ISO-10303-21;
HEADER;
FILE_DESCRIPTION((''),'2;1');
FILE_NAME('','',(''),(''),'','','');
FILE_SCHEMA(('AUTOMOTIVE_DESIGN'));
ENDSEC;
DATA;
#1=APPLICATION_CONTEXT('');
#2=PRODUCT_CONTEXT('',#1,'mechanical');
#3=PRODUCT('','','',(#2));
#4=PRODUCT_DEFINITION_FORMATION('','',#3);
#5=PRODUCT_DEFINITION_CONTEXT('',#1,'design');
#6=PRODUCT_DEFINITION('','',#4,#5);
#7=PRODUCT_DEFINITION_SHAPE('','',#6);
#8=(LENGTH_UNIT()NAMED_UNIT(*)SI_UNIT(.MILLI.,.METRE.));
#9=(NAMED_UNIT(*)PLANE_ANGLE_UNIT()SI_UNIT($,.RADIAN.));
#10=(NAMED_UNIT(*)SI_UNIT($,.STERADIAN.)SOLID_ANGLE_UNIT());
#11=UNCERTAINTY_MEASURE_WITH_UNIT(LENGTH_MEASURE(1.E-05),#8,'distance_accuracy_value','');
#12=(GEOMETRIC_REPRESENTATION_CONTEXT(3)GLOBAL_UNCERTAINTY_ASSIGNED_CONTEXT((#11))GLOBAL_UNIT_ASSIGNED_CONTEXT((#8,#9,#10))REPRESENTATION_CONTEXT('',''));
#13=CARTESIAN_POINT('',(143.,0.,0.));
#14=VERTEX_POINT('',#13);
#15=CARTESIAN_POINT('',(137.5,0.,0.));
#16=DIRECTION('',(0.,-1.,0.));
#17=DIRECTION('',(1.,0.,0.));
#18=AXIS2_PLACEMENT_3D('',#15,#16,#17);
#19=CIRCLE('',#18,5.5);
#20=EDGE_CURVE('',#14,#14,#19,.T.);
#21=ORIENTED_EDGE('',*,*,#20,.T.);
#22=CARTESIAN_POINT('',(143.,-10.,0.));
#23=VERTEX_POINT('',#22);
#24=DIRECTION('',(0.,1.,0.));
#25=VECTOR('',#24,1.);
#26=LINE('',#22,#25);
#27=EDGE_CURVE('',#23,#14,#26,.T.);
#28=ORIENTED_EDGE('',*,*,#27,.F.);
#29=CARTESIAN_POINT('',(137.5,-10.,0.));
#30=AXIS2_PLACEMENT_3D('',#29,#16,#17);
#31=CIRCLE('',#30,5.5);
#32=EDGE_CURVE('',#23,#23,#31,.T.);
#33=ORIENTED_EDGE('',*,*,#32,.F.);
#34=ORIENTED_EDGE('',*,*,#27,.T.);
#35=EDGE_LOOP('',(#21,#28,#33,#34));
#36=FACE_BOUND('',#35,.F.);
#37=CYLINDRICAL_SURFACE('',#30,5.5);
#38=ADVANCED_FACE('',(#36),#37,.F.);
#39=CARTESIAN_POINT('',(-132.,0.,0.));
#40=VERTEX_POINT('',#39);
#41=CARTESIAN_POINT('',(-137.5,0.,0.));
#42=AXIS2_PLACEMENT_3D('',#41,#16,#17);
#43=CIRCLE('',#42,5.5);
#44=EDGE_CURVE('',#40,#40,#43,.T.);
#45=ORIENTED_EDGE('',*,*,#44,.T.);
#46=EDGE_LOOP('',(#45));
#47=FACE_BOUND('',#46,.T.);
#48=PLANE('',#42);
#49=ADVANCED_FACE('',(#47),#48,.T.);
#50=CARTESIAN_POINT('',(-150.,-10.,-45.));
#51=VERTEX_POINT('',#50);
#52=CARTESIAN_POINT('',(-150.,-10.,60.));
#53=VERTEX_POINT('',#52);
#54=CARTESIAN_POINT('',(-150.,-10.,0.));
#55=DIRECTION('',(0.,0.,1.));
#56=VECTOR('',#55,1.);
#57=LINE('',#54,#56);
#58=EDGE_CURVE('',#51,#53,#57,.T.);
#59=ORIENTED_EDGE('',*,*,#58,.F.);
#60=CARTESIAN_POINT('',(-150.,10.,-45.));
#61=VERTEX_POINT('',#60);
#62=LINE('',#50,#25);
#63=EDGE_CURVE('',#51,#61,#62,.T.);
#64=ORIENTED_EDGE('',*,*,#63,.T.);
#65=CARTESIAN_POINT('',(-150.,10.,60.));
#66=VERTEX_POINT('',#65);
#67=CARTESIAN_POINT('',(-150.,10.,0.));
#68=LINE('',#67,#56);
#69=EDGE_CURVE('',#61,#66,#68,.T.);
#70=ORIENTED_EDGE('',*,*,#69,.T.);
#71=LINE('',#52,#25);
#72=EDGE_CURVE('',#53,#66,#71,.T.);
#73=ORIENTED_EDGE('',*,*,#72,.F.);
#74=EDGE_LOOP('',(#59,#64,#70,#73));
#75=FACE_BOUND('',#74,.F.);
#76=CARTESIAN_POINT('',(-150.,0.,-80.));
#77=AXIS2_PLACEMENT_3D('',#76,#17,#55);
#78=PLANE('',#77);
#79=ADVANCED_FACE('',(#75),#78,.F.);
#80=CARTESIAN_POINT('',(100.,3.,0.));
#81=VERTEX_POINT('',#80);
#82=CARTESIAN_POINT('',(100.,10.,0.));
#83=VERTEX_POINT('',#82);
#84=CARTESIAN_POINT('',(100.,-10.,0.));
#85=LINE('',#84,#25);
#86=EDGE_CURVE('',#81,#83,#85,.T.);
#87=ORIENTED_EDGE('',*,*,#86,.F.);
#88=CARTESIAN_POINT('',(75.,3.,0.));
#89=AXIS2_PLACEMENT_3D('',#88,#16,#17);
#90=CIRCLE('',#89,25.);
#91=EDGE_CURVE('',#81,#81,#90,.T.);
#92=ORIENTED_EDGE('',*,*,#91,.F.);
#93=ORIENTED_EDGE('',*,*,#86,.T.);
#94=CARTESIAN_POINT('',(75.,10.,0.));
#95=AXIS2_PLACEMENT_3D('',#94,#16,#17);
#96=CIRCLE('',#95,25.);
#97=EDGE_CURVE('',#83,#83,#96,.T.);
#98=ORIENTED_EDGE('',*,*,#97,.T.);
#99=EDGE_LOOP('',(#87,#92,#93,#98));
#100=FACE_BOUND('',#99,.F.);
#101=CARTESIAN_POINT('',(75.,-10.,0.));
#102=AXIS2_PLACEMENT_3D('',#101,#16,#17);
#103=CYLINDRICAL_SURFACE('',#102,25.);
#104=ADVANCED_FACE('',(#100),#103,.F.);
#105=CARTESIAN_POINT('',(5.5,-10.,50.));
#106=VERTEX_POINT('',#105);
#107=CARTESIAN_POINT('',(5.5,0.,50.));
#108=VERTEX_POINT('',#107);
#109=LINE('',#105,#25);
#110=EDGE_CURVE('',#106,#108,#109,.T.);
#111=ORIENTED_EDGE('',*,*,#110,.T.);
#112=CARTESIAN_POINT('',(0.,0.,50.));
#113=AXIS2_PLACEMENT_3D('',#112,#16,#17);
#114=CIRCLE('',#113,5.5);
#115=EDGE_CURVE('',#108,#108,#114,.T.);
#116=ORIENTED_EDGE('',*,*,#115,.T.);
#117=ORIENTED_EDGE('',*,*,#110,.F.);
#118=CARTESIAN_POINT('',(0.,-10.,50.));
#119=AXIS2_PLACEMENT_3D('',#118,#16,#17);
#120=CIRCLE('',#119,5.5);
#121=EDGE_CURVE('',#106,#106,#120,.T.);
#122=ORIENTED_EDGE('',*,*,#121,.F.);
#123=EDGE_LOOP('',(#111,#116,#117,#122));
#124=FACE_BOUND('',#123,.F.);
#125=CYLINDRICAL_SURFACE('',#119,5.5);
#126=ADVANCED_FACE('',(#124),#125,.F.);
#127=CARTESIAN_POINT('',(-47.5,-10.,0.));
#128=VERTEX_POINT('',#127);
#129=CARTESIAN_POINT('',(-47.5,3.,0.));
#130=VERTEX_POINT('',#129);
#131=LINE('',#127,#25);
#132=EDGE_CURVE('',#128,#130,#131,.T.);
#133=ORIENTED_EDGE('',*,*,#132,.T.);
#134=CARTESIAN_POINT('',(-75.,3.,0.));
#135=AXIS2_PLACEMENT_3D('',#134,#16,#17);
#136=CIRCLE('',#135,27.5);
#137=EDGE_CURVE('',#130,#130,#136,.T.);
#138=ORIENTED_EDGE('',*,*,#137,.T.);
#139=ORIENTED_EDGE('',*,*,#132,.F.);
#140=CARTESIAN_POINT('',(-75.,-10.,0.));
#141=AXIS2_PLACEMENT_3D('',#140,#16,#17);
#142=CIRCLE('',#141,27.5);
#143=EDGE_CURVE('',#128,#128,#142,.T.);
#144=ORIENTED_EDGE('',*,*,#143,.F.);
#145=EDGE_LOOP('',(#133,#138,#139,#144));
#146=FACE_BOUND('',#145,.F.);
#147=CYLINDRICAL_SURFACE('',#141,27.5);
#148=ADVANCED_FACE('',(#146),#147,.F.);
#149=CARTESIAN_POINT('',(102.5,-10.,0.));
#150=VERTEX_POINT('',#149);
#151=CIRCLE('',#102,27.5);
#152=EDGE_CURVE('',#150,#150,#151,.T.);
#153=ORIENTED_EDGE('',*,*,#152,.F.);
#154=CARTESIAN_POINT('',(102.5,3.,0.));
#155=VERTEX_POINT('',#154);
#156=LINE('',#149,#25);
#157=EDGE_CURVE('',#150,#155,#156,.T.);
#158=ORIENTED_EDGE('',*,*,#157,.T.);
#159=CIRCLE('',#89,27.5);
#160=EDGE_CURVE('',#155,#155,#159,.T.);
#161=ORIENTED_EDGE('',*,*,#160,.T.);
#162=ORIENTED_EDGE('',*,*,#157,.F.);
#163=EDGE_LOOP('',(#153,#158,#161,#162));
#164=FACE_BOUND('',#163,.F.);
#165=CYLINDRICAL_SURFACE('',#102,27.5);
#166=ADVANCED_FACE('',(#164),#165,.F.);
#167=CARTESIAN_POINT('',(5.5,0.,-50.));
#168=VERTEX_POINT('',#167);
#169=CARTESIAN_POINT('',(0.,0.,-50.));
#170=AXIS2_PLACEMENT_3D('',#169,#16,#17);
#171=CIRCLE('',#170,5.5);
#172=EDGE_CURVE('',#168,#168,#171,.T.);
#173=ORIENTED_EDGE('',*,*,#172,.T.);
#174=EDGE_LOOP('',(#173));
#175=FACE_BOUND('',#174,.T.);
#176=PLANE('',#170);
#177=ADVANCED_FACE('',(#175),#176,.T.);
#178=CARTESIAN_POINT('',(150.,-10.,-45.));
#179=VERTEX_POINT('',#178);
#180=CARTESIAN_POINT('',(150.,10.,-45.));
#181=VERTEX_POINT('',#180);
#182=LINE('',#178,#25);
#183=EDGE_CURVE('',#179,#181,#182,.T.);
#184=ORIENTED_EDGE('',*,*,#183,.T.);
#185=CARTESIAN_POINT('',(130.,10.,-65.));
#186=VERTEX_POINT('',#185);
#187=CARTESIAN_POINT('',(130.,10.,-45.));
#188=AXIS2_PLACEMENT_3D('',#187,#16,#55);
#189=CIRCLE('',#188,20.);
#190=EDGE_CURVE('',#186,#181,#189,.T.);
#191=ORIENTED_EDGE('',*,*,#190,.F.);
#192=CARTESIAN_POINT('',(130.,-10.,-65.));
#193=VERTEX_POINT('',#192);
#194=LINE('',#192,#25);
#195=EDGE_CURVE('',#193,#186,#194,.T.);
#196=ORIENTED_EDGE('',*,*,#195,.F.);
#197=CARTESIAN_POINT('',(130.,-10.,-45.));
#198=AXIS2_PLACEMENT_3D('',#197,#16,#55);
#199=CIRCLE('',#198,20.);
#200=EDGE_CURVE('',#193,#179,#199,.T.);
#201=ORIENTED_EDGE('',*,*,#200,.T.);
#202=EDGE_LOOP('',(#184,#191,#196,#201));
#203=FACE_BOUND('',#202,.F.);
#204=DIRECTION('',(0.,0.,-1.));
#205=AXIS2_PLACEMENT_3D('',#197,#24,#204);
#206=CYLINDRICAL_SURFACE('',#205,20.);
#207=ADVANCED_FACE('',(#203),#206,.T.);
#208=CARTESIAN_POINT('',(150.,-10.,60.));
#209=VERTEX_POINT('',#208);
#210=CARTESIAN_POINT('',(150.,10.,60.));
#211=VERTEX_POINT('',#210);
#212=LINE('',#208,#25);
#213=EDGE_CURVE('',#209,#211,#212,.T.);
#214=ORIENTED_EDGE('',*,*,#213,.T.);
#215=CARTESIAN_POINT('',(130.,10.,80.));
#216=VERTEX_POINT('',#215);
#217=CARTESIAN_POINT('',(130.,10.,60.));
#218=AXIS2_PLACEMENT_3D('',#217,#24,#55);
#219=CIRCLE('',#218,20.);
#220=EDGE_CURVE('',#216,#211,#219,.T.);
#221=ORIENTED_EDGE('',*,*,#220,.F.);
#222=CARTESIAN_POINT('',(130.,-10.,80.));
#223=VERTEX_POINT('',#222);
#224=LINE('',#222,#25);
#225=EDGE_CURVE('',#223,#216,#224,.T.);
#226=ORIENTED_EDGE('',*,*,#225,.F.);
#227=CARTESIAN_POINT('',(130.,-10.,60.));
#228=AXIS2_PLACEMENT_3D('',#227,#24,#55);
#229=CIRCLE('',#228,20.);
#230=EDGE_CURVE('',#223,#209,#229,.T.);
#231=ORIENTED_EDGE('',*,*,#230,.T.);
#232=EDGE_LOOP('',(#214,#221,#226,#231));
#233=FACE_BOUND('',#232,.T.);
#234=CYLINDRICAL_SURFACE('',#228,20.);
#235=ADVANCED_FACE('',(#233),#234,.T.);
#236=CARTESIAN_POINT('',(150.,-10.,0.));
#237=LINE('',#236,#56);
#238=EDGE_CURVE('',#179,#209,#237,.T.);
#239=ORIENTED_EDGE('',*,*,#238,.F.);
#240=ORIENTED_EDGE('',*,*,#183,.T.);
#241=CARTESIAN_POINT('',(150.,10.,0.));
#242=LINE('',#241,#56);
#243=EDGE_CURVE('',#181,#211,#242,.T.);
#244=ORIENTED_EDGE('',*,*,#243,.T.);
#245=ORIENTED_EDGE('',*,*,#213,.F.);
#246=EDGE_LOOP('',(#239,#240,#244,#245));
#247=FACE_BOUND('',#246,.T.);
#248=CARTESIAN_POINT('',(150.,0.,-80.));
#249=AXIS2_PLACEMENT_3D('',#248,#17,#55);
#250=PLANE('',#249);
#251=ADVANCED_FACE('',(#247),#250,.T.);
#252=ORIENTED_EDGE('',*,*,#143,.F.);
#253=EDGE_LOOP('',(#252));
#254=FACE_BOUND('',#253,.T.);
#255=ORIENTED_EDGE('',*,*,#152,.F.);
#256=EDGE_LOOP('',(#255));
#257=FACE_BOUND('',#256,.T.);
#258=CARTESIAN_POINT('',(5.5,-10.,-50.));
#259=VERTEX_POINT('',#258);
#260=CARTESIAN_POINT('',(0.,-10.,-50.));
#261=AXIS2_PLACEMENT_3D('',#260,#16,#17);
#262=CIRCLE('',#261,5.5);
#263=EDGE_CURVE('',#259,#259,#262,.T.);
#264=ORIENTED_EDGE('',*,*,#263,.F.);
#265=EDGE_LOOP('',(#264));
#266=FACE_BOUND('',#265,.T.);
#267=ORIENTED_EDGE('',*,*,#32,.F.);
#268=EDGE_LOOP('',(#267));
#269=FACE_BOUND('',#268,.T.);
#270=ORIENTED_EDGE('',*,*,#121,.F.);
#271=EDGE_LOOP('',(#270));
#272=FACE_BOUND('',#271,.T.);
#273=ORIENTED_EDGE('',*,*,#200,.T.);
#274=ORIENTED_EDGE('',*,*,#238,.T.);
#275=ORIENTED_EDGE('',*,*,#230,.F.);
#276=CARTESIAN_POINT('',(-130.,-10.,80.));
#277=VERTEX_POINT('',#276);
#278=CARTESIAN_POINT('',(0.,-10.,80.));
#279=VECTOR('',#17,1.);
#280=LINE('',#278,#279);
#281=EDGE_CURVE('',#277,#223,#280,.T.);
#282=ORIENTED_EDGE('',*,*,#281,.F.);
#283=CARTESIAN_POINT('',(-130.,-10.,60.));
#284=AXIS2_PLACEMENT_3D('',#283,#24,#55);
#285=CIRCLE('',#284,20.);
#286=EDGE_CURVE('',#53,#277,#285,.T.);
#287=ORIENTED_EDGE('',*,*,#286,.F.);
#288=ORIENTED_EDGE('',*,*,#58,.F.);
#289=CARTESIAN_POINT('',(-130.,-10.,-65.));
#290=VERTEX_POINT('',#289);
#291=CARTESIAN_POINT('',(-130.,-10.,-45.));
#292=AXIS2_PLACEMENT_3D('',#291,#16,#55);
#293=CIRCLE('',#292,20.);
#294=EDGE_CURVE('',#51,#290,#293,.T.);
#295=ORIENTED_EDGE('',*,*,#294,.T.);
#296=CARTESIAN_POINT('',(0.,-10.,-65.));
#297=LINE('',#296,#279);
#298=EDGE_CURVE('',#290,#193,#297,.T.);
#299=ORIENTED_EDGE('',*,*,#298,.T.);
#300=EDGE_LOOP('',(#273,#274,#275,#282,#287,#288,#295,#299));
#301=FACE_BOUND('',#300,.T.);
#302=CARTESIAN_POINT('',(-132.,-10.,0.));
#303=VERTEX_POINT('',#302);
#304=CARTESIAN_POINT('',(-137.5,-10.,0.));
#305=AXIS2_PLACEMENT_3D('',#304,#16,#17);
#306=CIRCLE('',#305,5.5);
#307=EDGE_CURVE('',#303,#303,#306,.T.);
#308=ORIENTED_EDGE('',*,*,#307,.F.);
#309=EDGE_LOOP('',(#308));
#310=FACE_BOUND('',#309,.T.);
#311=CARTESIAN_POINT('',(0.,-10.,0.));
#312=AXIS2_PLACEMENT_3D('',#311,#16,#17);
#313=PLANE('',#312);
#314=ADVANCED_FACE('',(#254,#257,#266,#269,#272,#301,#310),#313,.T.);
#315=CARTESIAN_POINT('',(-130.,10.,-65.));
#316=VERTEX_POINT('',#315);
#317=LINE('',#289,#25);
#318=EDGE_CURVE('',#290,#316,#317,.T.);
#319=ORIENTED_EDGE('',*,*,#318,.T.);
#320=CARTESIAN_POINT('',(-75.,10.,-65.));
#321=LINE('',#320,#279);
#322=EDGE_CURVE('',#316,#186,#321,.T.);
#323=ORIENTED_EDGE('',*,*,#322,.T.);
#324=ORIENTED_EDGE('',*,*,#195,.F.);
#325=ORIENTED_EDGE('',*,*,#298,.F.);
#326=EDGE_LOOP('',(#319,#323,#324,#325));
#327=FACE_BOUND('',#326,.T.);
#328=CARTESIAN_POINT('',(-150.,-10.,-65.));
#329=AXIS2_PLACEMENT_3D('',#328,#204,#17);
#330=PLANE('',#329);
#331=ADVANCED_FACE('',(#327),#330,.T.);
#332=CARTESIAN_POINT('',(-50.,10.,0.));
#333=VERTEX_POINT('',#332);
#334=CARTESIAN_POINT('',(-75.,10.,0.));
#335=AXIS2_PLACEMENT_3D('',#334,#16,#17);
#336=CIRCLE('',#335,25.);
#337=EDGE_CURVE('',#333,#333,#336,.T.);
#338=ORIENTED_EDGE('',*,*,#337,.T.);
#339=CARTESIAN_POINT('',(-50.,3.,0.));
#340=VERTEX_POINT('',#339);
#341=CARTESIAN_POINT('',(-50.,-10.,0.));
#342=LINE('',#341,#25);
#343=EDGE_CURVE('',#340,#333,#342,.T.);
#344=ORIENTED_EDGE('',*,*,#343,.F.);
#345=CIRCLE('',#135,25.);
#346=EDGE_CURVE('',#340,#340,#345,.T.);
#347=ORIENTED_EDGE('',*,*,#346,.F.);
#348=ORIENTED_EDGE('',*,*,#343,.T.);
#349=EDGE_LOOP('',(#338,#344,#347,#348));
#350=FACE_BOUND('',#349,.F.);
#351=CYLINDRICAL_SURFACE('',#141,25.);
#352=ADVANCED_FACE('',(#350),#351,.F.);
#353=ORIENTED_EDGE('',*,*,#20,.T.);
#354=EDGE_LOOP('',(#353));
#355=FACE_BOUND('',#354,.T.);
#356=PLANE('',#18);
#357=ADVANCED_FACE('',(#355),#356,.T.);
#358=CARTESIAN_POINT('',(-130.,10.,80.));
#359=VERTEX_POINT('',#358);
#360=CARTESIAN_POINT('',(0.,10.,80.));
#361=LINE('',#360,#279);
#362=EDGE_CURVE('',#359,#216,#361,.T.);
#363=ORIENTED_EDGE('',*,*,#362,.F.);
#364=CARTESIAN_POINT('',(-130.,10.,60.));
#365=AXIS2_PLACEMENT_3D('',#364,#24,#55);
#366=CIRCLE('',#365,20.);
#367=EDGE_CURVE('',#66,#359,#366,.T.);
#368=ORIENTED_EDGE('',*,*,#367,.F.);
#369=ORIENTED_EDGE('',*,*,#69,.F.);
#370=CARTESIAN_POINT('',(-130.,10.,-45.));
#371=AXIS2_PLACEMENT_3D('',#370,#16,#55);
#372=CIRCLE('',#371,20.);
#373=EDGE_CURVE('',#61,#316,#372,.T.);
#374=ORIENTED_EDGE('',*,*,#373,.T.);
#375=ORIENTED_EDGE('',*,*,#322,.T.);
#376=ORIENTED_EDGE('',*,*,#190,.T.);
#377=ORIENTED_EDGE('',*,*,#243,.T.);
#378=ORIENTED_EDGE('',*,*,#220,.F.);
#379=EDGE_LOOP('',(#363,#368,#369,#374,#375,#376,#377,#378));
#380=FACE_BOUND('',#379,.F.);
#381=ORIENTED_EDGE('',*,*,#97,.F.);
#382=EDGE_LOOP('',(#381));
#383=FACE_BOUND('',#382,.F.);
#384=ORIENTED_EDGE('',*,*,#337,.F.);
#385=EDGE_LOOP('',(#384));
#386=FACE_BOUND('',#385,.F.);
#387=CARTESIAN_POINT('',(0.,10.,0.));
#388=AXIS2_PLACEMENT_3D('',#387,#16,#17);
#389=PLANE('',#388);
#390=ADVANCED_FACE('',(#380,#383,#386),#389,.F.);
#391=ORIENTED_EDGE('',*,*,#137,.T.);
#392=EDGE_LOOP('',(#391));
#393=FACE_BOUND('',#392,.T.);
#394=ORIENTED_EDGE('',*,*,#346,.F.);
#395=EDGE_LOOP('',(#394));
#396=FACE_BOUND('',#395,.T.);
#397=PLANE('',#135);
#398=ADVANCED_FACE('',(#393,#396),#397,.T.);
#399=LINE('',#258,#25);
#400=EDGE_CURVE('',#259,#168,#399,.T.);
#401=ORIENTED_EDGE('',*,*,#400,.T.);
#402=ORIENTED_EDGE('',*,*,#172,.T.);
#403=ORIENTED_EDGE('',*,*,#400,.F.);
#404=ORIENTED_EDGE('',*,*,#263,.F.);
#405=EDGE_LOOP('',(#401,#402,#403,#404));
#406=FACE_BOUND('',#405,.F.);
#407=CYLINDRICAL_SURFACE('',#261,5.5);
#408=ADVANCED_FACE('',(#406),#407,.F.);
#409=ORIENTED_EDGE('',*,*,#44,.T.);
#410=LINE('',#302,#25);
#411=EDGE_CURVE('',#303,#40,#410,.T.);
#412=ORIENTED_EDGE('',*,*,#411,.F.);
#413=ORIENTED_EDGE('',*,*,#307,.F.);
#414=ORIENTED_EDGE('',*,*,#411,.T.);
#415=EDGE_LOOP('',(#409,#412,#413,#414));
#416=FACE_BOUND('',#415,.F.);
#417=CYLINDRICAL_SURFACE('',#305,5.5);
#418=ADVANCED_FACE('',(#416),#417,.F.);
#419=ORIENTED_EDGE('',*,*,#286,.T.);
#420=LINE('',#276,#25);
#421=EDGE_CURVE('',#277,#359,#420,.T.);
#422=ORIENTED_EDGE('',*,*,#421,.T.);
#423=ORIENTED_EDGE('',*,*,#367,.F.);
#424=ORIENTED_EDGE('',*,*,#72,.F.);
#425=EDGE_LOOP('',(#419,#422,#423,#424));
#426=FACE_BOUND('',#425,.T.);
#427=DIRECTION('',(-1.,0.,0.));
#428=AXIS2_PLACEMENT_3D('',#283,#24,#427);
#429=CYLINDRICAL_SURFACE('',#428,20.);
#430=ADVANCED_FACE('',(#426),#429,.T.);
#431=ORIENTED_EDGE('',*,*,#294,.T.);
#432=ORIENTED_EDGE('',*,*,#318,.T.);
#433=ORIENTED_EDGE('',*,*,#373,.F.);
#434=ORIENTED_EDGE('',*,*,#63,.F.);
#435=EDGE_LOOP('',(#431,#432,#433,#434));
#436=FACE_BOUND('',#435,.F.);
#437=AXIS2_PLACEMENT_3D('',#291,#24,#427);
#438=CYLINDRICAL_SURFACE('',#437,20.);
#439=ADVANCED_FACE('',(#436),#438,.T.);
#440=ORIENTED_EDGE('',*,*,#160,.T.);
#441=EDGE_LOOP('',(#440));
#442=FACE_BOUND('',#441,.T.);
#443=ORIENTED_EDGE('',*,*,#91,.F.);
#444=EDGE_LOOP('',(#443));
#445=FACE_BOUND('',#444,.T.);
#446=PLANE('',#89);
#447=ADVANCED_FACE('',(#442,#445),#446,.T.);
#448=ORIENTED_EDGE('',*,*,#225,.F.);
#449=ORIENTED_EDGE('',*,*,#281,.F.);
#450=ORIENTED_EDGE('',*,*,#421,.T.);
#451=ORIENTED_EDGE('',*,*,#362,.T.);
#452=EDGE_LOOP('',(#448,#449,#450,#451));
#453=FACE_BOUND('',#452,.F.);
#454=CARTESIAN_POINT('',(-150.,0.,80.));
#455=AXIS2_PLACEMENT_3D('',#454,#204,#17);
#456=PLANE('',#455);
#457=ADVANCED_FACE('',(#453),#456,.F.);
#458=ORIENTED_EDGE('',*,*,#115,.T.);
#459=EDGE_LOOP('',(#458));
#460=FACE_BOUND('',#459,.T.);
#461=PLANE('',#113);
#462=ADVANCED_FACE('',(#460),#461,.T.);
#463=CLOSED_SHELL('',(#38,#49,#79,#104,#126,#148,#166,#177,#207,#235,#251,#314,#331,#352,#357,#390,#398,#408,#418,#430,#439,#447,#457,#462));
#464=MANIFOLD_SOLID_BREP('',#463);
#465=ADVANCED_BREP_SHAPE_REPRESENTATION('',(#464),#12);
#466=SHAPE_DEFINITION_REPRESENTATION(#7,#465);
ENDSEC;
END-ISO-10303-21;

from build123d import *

# Parameters (mm, degrees)
F0_W      = 300
F0_H      = 160
F1_DEPTH  = 10
F2_R      = 25
F3_DEPTH  = 20.001
F4_R      = 5.5
F5_DEPTH  = 10
F6_W      = 300
F6_H      = 15
F7_DEPTH  = 20.001
F8_R      = 20
F9_R      = 27.5
F10_DEPTH = 13


with BuildPart() as f1:
    # F0 (on Front) → F1 (new body, symmetric)
    with BuildSketch(Plane.XZ):
        Rectangle(F0_W, F0_H)
    extrude(amount=F1_DEPTH, both=True)

    # F2 (on face) → F3 (cut, through all)
    with BuildSketch(Plane.XZ.offset(10)):
        with Locations((-75, 0)):
            Circle(F2_R)
        with Locations((75, 0)):
            Circle(F2_R)
    extrude(amount=-F3_DEPTH, mode=Mode.SUBTRACT)

    # F4 (on face) → F5 (cut)
    with BuildSketch(Plane.XZ.offset(10)):
        with Locations((-137.5, 0)):
            Circle(F4_R)
        with Locations((0, 50)):
            Circle(F4_R)
        with Locations((137.5, 0)):
            Circle(F4_R)
        with Locations((0, -50)):
            Circle(F4_R)
    extrude(amount=-F5_DEPTH, mode=Mode.SUBTRACT)

    # F6 (on face) → F7 (cut, through all)
    with BuildSketch(Plane.XZ.offset(10)):
        with Locations((0, -72.5)):
            Rectangle(F6_W, F6_H)
    extrude(amount=-F7_DEPTH, mode=Mode.SUBTRACT)

    # F8
    f8_edges = [f1.edges().sort_by_distance(p)[0] for p in [
        (-150, 0, 80),
        (150, 0, 80),
        (-150, 0, -65),
        (150, 0, -65),
    ]]
    fillet(f8_edges, radius=F8_R)

    # F9 (on face) → F10 (cut)
    with BuildSketch(Plane.XZ.offset(10)):
        with Locations((-75, 0)):
            Circle(F9_R)
        with Locations((75, 0)):
            Circle(F9_R)
    extrude(amount=-F10_DEPTH, mode=Mode.SUBTRACT)


solid = f1.part
